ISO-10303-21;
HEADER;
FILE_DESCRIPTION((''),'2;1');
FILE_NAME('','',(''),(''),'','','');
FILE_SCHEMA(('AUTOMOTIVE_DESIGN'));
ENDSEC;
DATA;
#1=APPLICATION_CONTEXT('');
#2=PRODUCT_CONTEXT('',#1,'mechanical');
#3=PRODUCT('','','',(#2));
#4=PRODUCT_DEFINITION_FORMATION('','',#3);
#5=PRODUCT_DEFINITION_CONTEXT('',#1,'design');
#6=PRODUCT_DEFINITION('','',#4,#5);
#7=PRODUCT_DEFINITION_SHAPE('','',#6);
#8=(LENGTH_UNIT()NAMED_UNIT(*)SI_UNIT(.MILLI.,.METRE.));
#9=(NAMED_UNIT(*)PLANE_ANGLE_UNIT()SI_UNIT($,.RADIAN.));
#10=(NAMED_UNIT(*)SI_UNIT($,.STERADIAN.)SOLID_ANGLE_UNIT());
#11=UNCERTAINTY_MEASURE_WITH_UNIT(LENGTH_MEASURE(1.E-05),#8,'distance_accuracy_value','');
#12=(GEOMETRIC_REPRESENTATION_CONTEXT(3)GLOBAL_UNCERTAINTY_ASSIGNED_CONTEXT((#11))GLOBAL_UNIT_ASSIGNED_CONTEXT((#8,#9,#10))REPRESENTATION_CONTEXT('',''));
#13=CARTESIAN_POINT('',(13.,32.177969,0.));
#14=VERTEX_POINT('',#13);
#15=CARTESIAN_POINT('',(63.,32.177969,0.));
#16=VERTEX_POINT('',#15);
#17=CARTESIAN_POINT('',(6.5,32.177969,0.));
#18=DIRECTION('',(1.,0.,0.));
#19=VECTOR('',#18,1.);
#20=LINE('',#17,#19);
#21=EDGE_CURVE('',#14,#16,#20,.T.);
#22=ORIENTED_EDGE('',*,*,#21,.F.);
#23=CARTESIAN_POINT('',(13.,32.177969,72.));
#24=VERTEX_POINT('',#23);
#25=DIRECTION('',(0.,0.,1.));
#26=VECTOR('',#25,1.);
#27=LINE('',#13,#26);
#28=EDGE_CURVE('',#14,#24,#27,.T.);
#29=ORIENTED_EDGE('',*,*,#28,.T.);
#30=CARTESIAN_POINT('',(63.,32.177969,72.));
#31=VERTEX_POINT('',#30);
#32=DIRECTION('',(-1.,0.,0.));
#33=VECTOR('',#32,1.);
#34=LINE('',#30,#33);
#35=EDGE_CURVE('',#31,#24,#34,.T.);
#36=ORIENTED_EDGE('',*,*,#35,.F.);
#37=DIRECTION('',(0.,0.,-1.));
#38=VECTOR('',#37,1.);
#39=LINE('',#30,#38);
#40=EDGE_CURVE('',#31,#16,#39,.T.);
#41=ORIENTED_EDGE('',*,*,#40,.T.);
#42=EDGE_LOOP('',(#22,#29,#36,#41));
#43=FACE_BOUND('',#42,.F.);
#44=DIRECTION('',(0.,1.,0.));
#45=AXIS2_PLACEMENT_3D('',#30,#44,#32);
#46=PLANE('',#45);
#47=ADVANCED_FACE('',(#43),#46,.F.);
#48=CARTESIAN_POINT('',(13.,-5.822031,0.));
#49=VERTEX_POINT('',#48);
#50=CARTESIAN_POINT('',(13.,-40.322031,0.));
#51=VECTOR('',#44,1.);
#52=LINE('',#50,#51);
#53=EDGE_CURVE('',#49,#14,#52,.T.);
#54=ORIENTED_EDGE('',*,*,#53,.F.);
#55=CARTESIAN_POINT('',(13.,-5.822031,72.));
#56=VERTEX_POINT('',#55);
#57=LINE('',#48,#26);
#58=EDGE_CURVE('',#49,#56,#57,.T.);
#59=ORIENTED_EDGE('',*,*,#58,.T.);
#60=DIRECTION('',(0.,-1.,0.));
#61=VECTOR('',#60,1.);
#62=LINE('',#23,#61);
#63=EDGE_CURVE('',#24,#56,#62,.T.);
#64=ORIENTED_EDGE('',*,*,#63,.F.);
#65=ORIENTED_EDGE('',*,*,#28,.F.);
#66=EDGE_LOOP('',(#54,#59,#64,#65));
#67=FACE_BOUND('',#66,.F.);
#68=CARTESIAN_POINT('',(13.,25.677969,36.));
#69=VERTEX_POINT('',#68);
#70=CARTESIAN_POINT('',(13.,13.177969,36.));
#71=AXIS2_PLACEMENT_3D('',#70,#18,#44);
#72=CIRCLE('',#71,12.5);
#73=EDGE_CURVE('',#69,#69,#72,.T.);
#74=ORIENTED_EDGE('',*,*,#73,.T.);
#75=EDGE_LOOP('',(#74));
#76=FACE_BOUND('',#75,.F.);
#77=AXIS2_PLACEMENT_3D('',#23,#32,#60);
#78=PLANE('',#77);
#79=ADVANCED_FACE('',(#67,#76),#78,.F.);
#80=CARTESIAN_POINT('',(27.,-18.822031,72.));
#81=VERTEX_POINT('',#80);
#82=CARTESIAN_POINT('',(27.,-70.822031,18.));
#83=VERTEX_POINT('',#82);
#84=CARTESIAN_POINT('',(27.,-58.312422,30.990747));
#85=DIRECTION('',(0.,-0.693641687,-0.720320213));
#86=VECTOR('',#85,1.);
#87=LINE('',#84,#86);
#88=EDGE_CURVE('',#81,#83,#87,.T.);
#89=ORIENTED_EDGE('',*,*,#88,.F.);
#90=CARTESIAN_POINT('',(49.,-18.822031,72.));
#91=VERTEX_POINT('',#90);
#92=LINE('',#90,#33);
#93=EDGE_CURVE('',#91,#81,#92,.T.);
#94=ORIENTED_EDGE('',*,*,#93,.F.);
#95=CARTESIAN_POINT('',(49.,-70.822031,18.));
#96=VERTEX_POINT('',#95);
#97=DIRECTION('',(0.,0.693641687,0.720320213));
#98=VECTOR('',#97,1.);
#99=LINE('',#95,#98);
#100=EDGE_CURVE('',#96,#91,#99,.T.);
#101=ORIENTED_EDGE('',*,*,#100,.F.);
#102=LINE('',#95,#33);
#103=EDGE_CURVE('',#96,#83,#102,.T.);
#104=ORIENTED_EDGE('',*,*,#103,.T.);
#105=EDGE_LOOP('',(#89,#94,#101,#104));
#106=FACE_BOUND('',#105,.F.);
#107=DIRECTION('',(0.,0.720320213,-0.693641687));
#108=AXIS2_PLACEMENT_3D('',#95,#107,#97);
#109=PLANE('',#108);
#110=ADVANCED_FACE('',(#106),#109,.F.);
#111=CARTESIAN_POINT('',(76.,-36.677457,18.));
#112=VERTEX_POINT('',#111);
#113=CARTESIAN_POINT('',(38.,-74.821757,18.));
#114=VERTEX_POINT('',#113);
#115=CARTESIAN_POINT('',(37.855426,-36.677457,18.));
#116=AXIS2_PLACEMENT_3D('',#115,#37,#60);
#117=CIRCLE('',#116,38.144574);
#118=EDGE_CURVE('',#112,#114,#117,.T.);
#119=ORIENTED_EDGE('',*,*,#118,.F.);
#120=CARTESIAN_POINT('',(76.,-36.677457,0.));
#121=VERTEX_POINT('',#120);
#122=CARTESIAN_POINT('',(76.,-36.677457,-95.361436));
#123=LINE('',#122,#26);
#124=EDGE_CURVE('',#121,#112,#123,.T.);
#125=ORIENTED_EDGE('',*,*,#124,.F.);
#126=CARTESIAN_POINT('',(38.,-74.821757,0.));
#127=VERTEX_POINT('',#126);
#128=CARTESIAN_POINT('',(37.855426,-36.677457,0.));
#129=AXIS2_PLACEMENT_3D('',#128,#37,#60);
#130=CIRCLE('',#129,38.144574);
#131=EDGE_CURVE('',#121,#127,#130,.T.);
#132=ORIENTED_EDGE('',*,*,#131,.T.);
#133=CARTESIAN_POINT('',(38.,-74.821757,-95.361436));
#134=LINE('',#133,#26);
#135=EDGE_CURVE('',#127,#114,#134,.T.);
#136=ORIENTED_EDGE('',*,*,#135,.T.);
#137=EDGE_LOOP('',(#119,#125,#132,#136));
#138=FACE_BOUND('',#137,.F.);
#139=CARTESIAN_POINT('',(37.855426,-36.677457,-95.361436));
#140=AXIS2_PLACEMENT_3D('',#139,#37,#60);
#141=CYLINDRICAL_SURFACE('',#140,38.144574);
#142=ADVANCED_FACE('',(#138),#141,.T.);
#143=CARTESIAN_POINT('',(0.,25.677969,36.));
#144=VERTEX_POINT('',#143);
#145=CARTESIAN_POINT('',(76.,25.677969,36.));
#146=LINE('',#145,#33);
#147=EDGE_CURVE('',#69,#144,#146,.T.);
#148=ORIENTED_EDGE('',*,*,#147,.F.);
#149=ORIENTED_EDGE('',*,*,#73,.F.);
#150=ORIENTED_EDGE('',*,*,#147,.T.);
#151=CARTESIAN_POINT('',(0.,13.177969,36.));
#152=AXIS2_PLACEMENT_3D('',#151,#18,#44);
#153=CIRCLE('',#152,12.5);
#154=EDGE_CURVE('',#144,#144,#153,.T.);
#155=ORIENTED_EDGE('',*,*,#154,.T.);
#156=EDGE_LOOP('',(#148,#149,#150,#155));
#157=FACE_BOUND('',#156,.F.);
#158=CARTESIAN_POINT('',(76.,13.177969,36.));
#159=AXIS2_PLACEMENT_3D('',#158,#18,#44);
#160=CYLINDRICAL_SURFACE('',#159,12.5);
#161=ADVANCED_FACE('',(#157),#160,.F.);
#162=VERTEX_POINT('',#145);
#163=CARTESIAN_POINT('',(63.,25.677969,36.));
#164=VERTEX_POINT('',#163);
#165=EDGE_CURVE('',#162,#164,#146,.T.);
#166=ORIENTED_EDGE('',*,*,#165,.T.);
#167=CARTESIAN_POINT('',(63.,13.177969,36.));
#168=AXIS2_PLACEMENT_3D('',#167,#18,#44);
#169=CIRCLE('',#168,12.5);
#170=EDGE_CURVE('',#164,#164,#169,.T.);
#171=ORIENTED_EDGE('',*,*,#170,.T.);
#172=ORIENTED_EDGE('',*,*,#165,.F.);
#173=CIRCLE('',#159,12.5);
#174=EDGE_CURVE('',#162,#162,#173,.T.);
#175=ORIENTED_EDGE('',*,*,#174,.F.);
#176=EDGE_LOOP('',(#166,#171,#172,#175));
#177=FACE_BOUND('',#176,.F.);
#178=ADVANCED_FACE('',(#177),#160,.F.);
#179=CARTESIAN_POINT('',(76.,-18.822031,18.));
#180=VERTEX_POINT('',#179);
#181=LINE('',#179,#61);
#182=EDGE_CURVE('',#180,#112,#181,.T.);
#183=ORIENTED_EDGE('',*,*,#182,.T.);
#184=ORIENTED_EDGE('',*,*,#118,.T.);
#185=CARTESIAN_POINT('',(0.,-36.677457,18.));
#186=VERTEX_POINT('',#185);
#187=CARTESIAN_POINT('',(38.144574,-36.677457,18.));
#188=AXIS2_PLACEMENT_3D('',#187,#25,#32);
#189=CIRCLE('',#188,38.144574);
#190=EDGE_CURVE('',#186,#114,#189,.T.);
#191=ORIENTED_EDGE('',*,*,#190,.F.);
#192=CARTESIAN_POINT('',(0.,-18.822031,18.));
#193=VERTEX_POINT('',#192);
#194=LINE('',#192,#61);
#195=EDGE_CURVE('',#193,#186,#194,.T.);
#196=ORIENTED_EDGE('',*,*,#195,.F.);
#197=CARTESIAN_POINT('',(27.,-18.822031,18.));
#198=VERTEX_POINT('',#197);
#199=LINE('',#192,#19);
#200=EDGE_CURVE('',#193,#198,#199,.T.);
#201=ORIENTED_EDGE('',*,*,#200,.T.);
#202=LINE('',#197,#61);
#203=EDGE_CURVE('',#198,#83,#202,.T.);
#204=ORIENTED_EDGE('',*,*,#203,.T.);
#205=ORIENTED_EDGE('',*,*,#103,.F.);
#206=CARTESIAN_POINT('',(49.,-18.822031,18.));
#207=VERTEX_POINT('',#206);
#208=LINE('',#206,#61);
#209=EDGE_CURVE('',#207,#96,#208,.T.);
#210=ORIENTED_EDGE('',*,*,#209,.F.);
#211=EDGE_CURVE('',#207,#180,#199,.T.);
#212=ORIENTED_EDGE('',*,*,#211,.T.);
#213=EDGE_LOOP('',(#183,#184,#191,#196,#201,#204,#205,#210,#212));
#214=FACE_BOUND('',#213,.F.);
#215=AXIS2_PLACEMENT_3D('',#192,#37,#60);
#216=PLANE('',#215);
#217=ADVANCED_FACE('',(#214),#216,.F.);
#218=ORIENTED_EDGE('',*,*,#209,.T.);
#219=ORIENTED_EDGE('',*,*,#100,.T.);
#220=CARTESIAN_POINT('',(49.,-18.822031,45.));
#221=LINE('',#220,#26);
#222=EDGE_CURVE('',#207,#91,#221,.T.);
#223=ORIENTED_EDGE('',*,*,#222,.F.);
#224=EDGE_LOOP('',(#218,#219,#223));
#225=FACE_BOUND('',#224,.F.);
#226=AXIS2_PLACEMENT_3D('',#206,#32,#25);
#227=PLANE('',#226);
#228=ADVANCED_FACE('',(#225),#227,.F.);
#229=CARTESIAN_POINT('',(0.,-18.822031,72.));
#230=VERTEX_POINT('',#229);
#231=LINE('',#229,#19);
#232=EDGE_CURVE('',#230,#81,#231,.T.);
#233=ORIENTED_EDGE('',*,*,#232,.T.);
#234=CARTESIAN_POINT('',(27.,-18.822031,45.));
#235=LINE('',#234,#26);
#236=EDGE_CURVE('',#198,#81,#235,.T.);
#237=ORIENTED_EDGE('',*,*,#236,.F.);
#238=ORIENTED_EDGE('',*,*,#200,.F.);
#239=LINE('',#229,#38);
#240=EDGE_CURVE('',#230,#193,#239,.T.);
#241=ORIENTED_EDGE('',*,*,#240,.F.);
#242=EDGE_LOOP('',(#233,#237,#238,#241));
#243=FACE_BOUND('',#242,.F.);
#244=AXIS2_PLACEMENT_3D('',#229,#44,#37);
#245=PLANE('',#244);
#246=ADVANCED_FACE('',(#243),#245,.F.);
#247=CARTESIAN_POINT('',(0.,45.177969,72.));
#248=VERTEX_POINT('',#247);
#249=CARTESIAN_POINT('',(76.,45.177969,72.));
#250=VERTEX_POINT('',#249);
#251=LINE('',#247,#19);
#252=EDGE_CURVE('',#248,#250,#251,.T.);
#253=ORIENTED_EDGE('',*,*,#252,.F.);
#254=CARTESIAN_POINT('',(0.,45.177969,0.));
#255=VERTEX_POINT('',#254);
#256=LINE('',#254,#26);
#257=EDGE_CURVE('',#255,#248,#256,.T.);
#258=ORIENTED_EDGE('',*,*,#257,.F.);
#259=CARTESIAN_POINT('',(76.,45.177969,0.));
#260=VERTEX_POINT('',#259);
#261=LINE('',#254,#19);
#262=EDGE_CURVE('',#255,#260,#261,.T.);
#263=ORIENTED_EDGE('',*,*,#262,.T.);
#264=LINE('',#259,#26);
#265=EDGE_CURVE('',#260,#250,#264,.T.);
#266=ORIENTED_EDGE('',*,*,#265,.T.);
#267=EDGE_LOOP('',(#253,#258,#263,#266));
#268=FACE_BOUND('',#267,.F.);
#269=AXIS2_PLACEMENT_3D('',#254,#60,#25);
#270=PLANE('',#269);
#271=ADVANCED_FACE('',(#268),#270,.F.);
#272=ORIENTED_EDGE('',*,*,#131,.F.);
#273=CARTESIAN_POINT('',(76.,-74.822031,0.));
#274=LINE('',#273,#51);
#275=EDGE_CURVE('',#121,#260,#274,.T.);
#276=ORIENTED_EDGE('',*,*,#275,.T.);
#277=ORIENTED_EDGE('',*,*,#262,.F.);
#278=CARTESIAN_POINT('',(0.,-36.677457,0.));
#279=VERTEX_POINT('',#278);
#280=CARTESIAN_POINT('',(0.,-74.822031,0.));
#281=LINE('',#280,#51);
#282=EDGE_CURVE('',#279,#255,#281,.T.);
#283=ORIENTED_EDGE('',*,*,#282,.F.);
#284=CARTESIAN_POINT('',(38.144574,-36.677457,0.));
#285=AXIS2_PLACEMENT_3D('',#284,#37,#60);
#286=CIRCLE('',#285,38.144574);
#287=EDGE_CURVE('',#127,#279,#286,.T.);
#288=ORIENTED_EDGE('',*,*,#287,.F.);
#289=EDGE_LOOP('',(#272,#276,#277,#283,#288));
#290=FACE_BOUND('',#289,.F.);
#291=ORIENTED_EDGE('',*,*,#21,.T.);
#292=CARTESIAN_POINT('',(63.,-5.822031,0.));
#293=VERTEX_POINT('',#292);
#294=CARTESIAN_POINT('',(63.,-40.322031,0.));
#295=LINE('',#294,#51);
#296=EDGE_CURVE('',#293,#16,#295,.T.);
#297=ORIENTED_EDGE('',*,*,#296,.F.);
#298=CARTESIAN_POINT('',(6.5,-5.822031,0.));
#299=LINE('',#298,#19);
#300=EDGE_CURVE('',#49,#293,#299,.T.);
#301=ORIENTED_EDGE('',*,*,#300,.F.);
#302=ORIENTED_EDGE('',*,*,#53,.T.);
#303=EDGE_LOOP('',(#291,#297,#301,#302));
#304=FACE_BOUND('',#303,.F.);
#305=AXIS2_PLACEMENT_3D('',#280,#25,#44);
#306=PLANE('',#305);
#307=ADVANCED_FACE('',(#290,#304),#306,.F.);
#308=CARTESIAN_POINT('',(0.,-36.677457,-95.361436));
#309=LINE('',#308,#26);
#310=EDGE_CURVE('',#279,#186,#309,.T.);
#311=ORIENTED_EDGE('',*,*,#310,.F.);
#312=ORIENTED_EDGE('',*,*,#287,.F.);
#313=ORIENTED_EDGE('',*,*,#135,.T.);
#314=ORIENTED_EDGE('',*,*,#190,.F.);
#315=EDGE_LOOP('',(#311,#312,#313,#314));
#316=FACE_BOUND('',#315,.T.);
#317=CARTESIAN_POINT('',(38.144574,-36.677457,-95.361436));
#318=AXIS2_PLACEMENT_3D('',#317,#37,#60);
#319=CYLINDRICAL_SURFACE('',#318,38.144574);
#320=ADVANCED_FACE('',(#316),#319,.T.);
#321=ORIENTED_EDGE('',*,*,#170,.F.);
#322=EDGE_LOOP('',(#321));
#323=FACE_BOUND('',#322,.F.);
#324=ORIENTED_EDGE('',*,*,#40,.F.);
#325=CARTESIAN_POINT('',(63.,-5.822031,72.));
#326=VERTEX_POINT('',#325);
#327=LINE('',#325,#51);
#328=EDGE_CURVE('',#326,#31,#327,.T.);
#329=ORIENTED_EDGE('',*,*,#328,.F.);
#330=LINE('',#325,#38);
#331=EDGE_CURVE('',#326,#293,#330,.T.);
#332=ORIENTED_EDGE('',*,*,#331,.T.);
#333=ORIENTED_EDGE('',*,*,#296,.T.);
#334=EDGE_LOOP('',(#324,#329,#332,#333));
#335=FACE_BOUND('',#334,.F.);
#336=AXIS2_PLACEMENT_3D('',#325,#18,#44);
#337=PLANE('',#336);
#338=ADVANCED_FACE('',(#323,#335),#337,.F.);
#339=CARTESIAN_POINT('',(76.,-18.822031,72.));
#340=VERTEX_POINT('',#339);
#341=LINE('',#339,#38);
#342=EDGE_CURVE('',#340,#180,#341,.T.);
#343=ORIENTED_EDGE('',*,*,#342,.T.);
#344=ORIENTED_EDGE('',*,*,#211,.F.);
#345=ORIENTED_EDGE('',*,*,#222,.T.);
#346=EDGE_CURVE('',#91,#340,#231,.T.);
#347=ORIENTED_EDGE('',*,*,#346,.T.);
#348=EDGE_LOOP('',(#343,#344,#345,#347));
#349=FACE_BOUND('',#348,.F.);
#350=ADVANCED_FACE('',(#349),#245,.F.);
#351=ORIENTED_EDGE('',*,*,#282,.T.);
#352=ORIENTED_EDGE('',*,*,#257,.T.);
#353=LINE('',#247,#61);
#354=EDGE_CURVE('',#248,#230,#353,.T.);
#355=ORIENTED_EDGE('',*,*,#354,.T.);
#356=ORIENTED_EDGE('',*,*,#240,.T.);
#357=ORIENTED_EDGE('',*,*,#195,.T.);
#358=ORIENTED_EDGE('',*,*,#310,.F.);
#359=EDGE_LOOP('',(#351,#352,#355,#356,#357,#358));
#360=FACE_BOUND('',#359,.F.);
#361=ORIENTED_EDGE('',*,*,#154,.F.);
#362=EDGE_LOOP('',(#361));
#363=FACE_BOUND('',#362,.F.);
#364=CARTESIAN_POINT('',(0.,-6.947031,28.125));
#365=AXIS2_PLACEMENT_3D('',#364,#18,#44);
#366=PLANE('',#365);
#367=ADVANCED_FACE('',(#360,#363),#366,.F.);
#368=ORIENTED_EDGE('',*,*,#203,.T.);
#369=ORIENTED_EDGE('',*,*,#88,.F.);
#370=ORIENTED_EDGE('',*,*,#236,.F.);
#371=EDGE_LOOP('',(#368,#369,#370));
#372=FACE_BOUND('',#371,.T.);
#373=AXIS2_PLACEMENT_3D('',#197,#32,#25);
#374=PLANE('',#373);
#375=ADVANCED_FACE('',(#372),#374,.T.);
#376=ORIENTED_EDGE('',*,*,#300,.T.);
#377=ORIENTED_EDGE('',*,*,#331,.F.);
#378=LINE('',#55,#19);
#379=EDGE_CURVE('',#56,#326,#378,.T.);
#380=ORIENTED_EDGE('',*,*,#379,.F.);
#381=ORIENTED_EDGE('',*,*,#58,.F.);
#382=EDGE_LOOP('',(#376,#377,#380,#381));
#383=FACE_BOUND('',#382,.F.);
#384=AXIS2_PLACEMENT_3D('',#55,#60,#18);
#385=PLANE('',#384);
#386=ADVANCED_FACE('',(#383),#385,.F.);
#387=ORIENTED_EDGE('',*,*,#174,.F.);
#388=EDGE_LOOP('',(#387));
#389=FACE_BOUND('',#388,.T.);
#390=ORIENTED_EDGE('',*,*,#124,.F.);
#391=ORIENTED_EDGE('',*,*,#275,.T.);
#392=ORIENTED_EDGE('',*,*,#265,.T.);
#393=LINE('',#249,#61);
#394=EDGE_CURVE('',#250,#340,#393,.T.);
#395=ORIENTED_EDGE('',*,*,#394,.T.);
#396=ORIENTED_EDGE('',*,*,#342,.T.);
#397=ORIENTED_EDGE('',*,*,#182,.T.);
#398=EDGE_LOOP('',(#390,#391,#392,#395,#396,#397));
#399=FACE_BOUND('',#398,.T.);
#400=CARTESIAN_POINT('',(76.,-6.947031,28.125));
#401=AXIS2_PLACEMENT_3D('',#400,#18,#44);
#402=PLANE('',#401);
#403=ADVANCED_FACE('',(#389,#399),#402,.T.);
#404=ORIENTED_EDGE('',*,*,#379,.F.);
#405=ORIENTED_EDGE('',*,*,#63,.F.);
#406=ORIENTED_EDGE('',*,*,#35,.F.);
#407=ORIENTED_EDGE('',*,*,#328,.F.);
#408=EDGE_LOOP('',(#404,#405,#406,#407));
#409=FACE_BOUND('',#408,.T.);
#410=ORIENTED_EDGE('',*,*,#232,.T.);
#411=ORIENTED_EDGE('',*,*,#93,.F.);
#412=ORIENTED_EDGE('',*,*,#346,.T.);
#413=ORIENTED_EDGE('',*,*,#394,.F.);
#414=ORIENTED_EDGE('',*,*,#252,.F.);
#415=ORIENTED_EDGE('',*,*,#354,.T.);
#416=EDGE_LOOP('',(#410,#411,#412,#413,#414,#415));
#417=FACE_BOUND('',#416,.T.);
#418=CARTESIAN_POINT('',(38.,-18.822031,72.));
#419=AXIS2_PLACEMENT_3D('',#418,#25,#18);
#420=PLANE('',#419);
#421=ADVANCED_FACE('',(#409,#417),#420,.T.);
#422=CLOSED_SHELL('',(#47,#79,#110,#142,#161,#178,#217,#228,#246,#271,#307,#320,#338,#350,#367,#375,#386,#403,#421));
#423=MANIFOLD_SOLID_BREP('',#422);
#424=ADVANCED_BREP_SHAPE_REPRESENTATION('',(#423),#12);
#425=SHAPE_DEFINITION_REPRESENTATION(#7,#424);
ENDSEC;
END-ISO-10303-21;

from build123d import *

# Parameters (mm, degrees)
F2_DEPTH    = 76
F3_R        = 12.5
F4_DEPTH    = 127.1
F6_DEPTH    = 53.4
F7_T1_DEPTH = 208.7228714275
F8_W        = 11
F8_H        = 54
F9_DEPTH    = 52
F10_W       = 11
F10_H       = 54
F11_DEPTH   = 52
F13_DEPTH   = 67.9
F14_W       = 50
F14_H       = 38
F15_DEPTH   = 79.6


# Not quite as in the source:
# - a fillet or chamfer that OpenCascade refuses, or shapes differently, is made with other operations: its cross-section is extruded or revolved along the edge and cut away or added


with BuildPart() as f2:
    # F1 (on Right) → F2 (new body)
    with BuildSketch(Plane.YZ):
        Polygon((-74.8220309615, 18), (-74.8220309615, 0), (45.1779690385, 0), (45.1779690385, 72), (-18.8220309615, 72), (-18.8220309615, 18), align=None)
    extrude(amount=F2_DEPTH)

    # F3 (on face) → F4 (cut)
    with BuildSketch(Plane.YZ.offset(76)):
        with Locations((13.1779690385, 36)):
            Circle(F3_R)
    extrude(amount=-F4_DEPTH, mode=Mode.SUBTRACT)

    # F5 (on face) → F6 (cut)
    with BuildSketch(Plane.XY.offset(72)):
        Polygon((13, 32.1779690385), (13, 13.1779690385), (13, -5.8220309615), (28.5150296986, -5.8220309615), (63, -5.8220309615), (63, 16.2556339055), (63, 32.1779690385), (35.4323200881, 32.1779690385), align=None)
    extrude(amount=-F6_DEPTH, mode=Mode.SUBTRACT)

    # F7: fillet of radius 38.1445742855 on 2 edges, made by hand

    # F7_s2 → F7_t1 (cut)
    with BuildSketch(Plane.XY.offset(-95.3614357137)):
        with BuildLine():
            ThreePointArc((38.1445742855, -74.8220309615), (11.1722871427, -63.6497438188), (0, -36.677456676))
            Line((0, -36.677456676), (0, -74.8220309615))
            Line((0, -74.8220309615), (38.1445742855, -74.8220309615))
        make_face()
        with BuildLine():
            ThreePointArc((37.8554257145, -74.8220309615), (64.8277128573, -63.6497438188), (76, -36.677456676))
            Line((76, -36.677456676), (76, -74.8220309615))
            Line((76, -74.8220309615), (37.8554257145, -74.8220309615))
        make_face()
    extrude(amount=F7_T1_DEPTH, mode=Mode.SUBTRACT)

    # F8 (on face) → F9 (join)
    with BuildSketch(Plane.XZ.offset(18.8220309615)):
        with Locations((32.5, 45)):
            Rectangle(F8_W, F8_H)
    extrude(amount=F9_DEPTH)

    # F10 (on face) → F11 (join)
    with BuildSketch(Plane.XZ.offset(18.8220309615)):
        with Locations((43.5, 45)):
            Rectangle(F10_W, F10_H)
    extrude(amount=F11_DEPTH)

    # F12 (on face) → F13 (cut)
    with BuildSketch(Plane.YZ.offset(49)):
        Polygon((-70.8220309615, 72), (-70.8220309615, 18), (-18.8220309615, 72), align=None)
    extrude(amount=-F13_DEPTH, mode=Mode.SUBTRACT)

    # F14 (on face) → F15 (cut)
    with BuildSketch(Plane.XY.offset(18.6)):
        with Locations((38, 13.1779690385)):
            Rectangle(F14_W, F14_H)
    extrude(amount=-F15_DEPTH, mode=Mode.SUBTRACT)


solid = f2.part
